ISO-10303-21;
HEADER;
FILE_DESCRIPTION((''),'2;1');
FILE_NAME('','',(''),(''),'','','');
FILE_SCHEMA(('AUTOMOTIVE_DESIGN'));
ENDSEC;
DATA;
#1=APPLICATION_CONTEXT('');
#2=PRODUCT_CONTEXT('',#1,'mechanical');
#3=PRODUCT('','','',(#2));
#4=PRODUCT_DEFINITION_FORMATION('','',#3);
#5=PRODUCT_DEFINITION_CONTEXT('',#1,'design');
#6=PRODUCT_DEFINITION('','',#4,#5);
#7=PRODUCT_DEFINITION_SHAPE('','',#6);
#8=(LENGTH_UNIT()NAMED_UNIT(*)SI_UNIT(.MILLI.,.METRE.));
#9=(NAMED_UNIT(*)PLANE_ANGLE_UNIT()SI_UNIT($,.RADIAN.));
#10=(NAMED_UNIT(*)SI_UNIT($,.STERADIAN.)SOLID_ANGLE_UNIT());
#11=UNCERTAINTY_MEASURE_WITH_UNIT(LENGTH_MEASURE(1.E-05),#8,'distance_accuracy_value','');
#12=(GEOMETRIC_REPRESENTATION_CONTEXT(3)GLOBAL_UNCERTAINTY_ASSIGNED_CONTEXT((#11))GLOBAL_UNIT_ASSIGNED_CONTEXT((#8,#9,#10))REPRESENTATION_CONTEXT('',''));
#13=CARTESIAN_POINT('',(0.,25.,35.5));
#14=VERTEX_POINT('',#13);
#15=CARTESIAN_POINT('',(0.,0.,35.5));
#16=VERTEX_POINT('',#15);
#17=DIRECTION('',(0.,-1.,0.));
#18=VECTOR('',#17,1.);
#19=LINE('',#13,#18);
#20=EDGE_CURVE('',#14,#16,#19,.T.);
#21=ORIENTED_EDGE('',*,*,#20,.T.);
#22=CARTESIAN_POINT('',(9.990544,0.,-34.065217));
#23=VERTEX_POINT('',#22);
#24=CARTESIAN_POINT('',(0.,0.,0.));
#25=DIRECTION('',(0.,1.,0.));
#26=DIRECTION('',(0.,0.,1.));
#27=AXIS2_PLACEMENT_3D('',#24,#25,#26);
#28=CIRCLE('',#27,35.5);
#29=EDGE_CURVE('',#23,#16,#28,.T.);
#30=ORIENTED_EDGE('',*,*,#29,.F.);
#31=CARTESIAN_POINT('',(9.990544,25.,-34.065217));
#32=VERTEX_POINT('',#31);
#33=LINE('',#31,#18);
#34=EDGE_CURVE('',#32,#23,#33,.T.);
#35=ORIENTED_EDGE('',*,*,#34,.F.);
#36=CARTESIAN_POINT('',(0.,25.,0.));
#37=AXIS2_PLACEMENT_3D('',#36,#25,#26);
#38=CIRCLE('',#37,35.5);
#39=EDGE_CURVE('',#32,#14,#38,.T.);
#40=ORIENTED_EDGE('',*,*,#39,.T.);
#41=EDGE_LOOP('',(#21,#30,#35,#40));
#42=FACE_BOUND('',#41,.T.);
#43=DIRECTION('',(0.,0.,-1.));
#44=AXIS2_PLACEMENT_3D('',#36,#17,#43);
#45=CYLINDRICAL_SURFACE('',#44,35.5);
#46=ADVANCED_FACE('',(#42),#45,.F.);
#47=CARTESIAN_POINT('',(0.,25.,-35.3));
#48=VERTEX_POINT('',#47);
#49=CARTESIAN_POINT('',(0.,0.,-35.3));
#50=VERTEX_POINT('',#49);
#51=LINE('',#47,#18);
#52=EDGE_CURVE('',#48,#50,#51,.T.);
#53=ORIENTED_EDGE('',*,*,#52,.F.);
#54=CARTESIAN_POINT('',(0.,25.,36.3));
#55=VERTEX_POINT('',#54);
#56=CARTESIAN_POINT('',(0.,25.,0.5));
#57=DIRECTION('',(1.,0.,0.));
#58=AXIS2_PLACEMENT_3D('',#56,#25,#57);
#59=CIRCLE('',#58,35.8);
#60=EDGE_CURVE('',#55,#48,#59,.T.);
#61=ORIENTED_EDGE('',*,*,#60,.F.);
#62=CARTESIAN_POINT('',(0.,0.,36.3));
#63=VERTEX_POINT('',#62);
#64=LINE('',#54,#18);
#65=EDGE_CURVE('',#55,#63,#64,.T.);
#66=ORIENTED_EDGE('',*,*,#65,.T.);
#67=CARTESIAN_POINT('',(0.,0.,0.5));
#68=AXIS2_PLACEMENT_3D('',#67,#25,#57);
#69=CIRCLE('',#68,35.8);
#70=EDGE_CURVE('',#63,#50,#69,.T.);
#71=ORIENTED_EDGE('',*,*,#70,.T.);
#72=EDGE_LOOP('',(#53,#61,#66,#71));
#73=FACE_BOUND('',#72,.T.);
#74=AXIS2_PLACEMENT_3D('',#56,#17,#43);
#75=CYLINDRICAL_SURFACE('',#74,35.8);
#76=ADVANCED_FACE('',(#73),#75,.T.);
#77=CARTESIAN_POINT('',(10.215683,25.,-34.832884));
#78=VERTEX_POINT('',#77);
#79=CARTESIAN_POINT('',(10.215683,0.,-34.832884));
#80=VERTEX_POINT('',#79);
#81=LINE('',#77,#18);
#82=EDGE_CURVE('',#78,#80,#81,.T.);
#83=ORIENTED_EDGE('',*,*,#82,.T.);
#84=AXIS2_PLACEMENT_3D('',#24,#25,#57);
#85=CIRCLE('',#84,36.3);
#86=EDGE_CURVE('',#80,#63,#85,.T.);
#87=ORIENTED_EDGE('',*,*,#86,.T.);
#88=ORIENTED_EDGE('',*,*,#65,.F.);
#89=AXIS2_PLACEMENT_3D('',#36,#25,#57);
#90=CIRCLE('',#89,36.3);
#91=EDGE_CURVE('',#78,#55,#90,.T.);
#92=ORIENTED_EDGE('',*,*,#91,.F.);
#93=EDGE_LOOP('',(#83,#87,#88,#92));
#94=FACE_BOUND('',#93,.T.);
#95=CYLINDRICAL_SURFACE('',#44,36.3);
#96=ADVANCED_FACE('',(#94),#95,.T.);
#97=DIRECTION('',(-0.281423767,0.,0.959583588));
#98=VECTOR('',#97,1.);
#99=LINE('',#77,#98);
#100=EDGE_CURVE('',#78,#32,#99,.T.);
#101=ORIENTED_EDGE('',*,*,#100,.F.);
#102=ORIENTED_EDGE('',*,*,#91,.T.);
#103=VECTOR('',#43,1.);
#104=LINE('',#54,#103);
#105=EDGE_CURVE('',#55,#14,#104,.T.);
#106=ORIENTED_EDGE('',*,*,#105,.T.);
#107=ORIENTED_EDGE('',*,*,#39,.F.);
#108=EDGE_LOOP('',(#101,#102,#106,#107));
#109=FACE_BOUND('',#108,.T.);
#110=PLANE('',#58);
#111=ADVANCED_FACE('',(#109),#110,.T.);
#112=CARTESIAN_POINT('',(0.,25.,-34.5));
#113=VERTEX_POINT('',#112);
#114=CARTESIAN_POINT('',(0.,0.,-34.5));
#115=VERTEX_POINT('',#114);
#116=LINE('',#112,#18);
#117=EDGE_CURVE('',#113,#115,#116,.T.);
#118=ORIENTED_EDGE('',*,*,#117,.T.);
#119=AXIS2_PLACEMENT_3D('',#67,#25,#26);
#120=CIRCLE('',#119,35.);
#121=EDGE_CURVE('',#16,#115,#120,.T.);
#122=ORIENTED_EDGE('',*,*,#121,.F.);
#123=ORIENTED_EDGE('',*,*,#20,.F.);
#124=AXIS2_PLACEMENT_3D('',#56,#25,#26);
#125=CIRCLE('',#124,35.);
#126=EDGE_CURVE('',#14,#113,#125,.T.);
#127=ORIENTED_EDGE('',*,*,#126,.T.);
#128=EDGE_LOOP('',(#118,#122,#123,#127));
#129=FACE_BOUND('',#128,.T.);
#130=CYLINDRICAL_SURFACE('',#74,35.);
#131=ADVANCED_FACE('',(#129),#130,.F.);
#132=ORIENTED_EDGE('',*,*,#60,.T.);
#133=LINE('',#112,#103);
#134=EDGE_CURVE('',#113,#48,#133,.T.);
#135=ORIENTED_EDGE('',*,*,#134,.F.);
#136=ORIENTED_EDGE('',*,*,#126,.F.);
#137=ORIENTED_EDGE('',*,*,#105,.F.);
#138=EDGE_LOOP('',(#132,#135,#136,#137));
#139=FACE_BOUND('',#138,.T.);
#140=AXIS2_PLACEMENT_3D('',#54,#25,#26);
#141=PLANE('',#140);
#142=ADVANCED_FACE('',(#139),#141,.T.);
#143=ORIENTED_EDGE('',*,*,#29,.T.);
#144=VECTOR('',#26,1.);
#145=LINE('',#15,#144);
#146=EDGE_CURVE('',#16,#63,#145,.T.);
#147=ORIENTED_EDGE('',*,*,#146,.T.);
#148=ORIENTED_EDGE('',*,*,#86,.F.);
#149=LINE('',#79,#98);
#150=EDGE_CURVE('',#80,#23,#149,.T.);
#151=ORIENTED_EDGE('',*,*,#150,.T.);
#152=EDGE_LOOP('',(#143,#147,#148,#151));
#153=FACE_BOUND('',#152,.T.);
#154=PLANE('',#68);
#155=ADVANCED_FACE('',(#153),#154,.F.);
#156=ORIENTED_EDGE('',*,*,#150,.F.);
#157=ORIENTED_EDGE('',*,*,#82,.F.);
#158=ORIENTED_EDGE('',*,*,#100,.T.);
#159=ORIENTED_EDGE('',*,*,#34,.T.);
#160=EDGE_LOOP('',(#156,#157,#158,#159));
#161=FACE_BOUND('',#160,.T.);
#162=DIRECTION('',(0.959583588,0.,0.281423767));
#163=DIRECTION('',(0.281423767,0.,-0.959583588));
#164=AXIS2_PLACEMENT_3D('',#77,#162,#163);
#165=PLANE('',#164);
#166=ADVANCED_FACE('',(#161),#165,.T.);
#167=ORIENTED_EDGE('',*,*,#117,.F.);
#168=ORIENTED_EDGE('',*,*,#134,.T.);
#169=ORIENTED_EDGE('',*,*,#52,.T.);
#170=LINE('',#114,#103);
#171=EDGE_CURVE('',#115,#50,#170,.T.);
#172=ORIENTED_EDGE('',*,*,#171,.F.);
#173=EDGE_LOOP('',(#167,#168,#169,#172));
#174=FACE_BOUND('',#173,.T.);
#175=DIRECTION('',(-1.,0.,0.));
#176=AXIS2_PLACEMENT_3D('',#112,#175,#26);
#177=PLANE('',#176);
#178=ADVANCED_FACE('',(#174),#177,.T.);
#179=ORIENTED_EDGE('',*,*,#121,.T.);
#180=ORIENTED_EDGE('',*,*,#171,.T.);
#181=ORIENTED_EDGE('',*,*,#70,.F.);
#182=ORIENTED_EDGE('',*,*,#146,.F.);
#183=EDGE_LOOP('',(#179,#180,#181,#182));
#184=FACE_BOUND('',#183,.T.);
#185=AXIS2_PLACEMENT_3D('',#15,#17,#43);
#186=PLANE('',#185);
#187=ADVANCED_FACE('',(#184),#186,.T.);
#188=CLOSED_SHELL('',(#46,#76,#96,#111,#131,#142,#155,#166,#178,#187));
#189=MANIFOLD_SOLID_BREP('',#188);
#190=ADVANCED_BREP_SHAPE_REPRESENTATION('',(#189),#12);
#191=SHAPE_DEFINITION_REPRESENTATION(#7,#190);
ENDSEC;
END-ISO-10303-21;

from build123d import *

# Parameters (mm, degrees)
BRIDA_BASE1_DEPTH = 25


# Sheet-metal steps are written as plain solids
with BuildPart() as part:
    # Croquis1 → Brida base1 (new body)
    with BuildSketch(Plane(origin=(0, 0, 0), x_dir=(1, 0, 0), z_dir=(0, 1, 0))):
        with BuildLine():
            ThreePointArc((9.990543733, 34.065217391), (-35.139473654, 5.046522694), (0, -35.5))
            ThreePointArc((0, -35.5), (35, -0.5), (0, 34.5))
            Line((0, 34.5), (0, 35.3))
            ThreePointArc((0, 35.3), (35.8, -0.5), (0, -36.3))
            ThreePointArc((0, -36.3), (-35.931349117, 5.160247149), (10.215682747, 34.832884262))
            Line((10.215682747, 34.832884262), (9.990543733, 34.065217391))
        make_face()
    extrude(amount=BRIDA_BASE1_DEPTH)


solid = part.part
